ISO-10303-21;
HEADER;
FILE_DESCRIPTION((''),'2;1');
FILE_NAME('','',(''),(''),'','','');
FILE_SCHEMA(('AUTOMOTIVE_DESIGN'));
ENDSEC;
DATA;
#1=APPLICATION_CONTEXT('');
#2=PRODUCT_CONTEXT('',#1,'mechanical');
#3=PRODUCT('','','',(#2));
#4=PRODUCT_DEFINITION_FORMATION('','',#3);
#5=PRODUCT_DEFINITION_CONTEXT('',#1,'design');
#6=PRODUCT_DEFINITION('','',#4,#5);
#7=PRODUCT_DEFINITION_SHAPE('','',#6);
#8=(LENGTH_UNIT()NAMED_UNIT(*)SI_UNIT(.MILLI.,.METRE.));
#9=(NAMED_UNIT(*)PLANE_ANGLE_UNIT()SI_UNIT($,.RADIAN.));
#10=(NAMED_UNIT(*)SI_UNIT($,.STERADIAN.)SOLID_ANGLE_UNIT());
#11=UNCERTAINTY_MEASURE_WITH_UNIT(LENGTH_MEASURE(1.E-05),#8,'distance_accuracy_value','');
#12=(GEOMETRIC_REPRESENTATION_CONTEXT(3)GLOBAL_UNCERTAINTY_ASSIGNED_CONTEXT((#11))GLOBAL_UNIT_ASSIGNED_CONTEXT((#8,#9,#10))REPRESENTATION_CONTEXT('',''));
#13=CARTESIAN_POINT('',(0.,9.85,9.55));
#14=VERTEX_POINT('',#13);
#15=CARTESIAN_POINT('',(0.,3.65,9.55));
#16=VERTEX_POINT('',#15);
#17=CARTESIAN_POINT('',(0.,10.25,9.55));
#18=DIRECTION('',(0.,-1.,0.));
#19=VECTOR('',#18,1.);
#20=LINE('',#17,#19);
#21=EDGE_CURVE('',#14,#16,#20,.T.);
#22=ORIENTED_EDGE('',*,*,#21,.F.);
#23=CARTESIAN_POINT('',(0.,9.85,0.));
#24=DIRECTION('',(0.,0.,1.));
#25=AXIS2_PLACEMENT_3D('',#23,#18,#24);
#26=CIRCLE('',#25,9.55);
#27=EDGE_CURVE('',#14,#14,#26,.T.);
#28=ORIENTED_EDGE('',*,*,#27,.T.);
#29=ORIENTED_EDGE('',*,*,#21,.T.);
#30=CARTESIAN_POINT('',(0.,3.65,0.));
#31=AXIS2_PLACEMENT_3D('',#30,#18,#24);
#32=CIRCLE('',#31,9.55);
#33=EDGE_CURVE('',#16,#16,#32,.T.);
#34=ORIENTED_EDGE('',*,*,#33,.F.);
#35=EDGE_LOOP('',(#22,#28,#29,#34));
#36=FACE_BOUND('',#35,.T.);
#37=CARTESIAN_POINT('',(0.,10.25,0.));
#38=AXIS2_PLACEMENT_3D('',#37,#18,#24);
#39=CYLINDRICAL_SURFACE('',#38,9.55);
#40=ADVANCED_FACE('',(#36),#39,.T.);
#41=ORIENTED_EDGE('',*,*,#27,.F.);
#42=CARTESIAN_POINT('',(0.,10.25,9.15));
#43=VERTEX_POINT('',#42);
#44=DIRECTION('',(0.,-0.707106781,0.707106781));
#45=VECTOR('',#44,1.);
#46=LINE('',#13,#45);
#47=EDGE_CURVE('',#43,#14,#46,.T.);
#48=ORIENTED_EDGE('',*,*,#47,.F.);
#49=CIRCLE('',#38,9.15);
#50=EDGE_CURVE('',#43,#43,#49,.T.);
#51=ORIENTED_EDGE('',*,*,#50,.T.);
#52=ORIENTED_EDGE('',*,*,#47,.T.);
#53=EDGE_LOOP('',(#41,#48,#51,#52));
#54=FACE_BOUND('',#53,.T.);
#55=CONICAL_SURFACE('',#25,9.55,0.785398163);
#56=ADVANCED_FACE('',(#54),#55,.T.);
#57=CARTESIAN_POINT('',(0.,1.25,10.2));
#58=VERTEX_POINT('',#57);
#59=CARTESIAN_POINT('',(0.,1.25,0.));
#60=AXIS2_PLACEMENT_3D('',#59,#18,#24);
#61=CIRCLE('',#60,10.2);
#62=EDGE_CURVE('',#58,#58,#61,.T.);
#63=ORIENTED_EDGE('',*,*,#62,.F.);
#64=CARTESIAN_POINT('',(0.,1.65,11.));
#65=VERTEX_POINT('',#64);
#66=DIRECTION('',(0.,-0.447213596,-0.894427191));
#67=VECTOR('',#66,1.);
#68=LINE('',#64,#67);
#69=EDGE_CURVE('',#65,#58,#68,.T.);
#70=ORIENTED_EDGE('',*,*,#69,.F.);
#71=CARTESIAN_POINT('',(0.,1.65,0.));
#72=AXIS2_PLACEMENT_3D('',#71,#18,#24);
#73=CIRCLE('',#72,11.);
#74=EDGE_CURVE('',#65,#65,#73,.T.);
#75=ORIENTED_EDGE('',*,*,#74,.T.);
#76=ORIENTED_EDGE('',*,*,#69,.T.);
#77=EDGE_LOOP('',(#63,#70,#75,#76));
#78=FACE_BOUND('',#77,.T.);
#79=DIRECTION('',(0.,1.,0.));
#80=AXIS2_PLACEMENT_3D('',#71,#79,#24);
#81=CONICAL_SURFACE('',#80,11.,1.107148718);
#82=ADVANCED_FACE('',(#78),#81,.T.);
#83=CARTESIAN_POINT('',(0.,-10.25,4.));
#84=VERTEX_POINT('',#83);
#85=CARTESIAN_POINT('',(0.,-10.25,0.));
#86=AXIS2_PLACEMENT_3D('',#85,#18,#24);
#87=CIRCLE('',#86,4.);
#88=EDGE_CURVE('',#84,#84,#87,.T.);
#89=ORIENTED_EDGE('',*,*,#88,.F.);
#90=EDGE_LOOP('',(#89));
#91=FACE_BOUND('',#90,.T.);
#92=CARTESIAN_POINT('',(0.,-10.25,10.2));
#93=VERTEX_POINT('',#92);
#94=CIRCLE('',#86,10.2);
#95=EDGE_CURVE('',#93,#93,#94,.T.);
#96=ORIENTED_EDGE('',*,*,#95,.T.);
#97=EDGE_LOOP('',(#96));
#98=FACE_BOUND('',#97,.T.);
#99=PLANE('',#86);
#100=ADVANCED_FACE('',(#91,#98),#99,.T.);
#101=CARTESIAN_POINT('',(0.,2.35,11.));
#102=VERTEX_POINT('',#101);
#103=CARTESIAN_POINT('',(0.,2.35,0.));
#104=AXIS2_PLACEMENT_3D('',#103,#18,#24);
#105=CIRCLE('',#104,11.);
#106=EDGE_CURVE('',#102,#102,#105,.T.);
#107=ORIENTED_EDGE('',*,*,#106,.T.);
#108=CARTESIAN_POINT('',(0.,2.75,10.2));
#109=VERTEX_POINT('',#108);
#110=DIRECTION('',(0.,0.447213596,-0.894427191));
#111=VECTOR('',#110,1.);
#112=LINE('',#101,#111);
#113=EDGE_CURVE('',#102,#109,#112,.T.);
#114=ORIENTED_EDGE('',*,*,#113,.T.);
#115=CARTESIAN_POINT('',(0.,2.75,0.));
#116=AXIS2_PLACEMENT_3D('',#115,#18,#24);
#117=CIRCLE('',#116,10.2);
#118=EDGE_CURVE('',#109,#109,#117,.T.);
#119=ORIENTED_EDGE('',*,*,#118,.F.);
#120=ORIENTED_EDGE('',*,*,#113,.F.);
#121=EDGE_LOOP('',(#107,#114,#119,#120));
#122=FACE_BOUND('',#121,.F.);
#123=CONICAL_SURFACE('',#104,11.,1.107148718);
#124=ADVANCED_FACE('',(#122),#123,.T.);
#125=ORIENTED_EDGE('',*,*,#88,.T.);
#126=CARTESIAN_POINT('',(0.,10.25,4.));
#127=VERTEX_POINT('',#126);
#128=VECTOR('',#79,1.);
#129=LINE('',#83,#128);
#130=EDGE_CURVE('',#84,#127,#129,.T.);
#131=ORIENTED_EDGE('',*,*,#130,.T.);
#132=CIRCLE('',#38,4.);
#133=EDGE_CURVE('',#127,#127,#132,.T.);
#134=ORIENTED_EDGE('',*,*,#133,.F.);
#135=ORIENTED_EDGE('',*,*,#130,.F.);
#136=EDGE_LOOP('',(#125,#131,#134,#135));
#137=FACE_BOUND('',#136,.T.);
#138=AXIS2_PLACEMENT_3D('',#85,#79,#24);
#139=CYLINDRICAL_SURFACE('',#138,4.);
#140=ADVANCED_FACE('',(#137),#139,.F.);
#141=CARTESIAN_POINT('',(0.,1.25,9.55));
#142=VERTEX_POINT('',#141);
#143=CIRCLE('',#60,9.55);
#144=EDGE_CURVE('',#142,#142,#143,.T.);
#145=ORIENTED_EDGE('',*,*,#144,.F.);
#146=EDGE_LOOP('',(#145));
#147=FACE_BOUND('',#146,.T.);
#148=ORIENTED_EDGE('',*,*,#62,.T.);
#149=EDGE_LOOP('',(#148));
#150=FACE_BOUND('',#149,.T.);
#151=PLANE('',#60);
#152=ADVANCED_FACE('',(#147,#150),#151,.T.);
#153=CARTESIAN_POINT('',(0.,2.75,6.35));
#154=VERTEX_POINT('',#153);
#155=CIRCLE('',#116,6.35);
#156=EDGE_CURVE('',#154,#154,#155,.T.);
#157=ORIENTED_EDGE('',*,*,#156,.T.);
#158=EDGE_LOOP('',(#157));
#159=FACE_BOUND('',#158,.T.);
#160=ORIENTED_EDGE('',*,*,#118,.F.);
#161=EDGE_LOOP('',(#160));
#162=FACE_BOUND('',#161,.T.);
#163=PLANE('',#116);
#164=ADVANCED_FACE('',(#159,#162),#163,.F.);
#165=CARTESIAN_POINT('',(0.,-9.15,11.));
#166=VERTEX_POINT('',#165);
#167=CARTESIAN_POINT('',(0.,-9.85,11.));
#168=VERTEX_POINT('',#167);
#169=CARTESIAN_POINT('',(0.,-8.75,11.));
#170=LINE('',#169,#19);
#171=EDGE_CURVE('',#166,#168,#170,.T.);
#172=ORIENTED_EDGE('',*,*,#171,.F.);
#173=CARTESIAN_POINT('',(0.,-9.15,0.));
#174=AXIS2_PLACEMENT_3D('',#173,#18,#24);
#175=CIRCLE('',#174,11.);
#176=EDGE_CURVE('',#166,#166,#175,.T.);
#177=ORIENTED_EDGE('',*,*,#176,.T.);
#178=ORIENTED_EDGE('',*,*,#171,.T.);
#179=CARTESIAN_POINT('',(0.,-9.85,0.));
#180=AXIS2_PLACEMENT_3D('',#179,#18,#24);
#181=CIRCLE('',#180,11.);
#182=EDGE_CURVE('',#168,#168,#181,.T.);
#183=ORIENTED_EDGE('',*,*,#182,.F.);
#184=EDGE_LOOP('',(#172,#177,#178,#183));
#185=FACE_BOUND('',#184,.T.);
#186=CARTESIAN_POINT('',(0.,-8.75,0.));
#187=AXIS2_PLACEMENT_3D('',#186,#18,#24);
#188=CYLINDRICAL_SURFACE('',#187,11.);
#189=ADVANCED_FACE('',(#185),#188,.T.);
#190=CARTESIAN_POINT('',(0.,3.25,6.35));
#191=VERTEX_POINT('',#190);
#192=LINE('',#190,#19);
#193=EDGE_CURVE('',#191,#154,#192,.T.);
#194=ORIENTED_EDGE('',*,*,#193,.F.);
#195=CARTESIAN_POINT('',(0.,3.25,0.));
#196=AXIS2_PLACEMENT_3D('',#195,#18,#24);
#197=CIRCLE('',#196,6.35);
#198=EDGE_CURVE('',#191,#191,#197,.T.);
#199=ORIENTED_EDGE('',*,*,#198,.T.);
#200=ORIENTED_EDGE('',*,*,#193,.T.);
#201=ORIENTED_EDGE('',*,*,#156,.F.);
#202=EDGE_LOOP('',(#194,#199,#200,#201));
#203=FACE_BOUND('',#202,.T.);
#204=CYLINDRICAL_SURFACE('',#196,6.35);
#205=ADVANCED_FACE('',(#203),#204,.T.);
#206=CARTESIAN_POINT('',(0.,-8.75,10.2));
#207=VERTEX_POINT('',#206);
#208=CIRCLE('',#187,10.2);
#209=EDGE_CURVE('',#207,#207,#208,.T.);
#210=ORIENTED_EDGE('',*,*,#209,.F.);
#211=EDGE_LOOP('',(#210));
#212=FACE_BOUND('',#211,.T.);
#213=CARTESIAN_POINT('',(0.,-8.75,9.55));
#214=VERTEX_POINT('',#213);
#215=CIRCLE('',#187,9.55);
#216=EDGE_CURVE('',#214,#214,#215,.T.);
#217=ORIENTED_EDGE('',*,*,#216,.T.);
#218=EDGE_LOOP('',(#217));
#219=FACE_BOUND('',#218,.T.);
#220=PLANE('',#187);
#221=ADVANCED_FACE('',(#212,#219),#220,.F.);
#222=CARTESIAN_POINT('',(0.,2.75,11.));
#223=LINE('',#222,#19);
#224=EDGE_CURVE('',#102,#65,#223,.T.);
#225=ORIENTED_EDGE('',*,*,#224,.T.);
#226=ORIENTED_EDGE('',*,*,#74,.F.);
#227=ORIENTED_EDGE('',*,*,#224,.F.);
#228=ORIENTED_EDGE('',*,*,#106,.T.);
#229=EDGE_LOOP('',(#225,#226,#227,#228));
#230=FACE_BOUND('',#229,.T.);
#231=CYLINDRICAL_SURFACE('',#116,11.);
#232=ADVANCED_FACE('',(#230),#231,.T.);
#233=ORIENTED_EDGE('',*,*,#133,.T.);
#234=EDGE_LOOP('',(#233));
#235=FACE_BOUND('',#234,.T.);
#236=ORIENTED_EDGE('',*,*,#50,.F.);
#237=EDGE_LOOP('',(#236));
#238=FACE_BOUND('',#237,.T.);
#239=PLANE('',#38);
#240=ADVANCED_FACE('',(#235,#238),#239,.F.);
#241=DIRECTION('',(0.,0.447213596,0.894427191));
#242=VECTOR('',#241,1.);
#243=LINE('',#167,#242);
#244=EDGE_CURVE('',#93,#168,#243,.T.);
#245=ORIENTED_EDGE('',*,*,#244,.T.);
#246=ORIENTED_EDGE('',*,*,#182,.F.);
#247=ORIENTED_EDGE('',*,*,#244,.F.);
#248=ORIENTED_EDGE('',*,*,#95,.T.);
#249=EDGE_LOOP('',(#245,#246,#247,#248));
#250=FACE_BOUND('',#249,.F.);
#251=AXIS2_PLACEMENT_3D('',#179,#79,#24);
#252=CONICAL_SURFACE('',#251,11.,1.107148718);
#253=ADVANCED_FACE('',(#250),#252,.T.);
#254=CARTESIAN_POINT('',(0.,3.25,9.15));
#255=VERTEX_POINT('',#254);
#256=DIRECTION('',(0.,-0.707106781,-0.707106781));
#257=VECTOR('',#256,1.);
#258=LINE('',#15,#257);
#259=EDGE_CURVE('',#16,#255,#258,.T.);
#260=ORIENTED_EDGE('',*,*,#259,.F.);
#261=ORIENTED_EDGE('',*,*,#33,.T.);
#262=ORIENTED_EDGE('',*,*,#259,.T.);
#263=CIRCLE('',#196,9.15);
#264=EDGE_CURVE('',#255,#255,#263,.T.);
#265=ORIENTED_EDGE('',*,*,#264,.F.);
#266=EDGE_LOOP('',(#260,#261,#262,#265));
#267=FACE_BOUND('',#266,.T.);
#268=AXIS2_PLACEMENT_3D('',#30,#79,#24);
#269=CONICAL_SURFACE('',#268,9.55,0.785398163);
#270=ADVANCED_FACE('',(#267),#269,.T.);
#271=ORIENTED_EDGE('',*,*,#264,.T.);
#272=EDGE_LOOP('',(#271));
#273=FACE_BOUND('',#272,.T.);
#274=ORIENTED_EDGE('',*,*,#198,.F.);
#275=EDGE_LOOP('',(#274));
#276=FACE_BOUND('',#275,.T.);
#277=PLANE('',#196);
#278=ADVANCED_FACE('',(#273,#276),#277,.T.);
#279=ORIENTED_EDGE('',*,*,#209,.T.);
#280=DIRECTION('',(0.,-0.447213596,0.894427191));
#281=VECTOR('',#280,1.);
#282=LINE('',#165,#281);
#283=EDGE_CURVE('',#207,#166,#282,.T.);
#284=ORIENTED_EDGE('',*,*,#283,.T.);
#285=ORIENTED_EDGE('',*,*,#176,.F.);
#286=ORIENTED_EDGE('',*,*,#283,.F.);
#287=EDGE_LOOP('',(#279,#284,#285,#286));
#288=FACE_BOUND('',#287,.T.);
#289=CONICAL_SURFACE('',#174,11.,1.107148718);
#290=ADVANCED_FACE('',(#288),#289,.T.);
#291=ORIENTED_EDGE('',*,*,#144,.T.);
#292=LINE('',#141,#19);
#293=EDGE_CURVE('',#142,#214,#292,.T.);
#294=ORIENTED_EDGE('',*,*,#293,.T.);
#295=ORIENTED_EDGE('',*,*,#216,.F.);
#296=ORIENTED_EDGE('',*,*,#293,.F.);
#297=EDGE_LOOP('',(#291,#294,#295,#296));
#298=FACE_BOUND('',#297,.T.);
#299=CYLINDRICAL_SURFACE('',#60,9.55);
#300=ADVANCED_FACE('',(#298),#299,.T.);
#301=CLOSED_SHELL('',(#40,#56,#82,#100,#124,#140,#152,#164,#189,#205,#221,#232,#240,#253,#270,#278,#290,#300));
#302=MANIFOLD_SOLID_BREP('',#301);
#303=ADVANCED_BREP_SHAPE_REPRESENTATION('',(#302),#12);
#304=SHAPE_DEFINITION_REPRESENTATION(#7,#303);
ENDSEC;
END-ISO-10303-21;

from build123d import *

# Parameters (mm, degrees)
F2_C1_SIZE2 = 0.4
F2_C1_SIZE  = 0.8
F2_C2_SIZE2 = 0.8
F2_C2_SIZE  = 0.4
F2_C3_SIZE2 = 0.8
F2_C3_SIZE  = 0.4
F3_SIZE2    = 0.4
F3_SIZE     = 0.8
F4_SIZE     = 0.4


with BuildPart() as f1:
    # F0 (on Right) → F1 (revolve)
    with BuildSketch(Plane.YZ):
        Polygon((-10.25, 11), (-10.25, 4), (10.25, 4), (10.25, 9.55), (3.25, 9.55), (3.25, 6.35), (2.75, 6.35), (2.75, 11), (1.25, 11), (1.25, 9.55), (-8.75, 9.55), (-8.75, 11), align=None)
    revolve(axis=Axis((0, -3.1587743408, 0), (0, -1, 0)))

    # F2: chamfer of 0.4 x 0.8 on 3 edges, made by hand

    # F2_c1
    f2_c1_edges = [f1.edges().sort_by_distance(p)[0] for p in [
        (0, -10.25, -11),
    ]]
    f2_c1_side = f1.faces().sort_by_distance((0, -10.25, -10.992))[0]
    chamfer(f2_c1_edges, length=F2_C1_SIZE, length2=F2_C1_SIZE2, reference=f2_c1_side)

    # F2_c2
    f2_c2_edges = [f1.edges().sort_by_distance(p)[0] for p in [
        (0, 2.75, -11),
    ]]
    f2_c2_side = f1.faces().sort_by_distance((0, 2.742, -11))[0]
    chamfer(f2_c2_edges, length=F2_C2_SIZE, length2=F2_C2_SIZE2, reference=f2_c2_side)

    # F2_c3
    f2_c3_edges = [f1.edges().sort_by_distance(p)[0] for p in [
        (0, 1.25, -11),
    ]]
    f2_c3_side = f1.faces().sort_by_distance((0, 1.258, -11))[0]
    chamfer(f2_c3_edges, length=F2_C3_SIZE, length2=F2_C3_SIZE2, reference=f2_c3_side)

    # F3
    f3_edges = [f1.edges().sort_by_distance(p)[0] for p in [
        (0, -8.75, -11),
    ]]
    chamfer(f3_edges, length=F3_SIZE, length2=F3_SIZE2)

    # F4
    f4_edges = [f1.edges().sort_by_distance(p)[0] for p in [
        (0, 3.25, -9.55),
        (0, 10.25, -9.55),
    ]]
    chamfer(f4_edges, length=F4_SIZE)


solid = f1.part
